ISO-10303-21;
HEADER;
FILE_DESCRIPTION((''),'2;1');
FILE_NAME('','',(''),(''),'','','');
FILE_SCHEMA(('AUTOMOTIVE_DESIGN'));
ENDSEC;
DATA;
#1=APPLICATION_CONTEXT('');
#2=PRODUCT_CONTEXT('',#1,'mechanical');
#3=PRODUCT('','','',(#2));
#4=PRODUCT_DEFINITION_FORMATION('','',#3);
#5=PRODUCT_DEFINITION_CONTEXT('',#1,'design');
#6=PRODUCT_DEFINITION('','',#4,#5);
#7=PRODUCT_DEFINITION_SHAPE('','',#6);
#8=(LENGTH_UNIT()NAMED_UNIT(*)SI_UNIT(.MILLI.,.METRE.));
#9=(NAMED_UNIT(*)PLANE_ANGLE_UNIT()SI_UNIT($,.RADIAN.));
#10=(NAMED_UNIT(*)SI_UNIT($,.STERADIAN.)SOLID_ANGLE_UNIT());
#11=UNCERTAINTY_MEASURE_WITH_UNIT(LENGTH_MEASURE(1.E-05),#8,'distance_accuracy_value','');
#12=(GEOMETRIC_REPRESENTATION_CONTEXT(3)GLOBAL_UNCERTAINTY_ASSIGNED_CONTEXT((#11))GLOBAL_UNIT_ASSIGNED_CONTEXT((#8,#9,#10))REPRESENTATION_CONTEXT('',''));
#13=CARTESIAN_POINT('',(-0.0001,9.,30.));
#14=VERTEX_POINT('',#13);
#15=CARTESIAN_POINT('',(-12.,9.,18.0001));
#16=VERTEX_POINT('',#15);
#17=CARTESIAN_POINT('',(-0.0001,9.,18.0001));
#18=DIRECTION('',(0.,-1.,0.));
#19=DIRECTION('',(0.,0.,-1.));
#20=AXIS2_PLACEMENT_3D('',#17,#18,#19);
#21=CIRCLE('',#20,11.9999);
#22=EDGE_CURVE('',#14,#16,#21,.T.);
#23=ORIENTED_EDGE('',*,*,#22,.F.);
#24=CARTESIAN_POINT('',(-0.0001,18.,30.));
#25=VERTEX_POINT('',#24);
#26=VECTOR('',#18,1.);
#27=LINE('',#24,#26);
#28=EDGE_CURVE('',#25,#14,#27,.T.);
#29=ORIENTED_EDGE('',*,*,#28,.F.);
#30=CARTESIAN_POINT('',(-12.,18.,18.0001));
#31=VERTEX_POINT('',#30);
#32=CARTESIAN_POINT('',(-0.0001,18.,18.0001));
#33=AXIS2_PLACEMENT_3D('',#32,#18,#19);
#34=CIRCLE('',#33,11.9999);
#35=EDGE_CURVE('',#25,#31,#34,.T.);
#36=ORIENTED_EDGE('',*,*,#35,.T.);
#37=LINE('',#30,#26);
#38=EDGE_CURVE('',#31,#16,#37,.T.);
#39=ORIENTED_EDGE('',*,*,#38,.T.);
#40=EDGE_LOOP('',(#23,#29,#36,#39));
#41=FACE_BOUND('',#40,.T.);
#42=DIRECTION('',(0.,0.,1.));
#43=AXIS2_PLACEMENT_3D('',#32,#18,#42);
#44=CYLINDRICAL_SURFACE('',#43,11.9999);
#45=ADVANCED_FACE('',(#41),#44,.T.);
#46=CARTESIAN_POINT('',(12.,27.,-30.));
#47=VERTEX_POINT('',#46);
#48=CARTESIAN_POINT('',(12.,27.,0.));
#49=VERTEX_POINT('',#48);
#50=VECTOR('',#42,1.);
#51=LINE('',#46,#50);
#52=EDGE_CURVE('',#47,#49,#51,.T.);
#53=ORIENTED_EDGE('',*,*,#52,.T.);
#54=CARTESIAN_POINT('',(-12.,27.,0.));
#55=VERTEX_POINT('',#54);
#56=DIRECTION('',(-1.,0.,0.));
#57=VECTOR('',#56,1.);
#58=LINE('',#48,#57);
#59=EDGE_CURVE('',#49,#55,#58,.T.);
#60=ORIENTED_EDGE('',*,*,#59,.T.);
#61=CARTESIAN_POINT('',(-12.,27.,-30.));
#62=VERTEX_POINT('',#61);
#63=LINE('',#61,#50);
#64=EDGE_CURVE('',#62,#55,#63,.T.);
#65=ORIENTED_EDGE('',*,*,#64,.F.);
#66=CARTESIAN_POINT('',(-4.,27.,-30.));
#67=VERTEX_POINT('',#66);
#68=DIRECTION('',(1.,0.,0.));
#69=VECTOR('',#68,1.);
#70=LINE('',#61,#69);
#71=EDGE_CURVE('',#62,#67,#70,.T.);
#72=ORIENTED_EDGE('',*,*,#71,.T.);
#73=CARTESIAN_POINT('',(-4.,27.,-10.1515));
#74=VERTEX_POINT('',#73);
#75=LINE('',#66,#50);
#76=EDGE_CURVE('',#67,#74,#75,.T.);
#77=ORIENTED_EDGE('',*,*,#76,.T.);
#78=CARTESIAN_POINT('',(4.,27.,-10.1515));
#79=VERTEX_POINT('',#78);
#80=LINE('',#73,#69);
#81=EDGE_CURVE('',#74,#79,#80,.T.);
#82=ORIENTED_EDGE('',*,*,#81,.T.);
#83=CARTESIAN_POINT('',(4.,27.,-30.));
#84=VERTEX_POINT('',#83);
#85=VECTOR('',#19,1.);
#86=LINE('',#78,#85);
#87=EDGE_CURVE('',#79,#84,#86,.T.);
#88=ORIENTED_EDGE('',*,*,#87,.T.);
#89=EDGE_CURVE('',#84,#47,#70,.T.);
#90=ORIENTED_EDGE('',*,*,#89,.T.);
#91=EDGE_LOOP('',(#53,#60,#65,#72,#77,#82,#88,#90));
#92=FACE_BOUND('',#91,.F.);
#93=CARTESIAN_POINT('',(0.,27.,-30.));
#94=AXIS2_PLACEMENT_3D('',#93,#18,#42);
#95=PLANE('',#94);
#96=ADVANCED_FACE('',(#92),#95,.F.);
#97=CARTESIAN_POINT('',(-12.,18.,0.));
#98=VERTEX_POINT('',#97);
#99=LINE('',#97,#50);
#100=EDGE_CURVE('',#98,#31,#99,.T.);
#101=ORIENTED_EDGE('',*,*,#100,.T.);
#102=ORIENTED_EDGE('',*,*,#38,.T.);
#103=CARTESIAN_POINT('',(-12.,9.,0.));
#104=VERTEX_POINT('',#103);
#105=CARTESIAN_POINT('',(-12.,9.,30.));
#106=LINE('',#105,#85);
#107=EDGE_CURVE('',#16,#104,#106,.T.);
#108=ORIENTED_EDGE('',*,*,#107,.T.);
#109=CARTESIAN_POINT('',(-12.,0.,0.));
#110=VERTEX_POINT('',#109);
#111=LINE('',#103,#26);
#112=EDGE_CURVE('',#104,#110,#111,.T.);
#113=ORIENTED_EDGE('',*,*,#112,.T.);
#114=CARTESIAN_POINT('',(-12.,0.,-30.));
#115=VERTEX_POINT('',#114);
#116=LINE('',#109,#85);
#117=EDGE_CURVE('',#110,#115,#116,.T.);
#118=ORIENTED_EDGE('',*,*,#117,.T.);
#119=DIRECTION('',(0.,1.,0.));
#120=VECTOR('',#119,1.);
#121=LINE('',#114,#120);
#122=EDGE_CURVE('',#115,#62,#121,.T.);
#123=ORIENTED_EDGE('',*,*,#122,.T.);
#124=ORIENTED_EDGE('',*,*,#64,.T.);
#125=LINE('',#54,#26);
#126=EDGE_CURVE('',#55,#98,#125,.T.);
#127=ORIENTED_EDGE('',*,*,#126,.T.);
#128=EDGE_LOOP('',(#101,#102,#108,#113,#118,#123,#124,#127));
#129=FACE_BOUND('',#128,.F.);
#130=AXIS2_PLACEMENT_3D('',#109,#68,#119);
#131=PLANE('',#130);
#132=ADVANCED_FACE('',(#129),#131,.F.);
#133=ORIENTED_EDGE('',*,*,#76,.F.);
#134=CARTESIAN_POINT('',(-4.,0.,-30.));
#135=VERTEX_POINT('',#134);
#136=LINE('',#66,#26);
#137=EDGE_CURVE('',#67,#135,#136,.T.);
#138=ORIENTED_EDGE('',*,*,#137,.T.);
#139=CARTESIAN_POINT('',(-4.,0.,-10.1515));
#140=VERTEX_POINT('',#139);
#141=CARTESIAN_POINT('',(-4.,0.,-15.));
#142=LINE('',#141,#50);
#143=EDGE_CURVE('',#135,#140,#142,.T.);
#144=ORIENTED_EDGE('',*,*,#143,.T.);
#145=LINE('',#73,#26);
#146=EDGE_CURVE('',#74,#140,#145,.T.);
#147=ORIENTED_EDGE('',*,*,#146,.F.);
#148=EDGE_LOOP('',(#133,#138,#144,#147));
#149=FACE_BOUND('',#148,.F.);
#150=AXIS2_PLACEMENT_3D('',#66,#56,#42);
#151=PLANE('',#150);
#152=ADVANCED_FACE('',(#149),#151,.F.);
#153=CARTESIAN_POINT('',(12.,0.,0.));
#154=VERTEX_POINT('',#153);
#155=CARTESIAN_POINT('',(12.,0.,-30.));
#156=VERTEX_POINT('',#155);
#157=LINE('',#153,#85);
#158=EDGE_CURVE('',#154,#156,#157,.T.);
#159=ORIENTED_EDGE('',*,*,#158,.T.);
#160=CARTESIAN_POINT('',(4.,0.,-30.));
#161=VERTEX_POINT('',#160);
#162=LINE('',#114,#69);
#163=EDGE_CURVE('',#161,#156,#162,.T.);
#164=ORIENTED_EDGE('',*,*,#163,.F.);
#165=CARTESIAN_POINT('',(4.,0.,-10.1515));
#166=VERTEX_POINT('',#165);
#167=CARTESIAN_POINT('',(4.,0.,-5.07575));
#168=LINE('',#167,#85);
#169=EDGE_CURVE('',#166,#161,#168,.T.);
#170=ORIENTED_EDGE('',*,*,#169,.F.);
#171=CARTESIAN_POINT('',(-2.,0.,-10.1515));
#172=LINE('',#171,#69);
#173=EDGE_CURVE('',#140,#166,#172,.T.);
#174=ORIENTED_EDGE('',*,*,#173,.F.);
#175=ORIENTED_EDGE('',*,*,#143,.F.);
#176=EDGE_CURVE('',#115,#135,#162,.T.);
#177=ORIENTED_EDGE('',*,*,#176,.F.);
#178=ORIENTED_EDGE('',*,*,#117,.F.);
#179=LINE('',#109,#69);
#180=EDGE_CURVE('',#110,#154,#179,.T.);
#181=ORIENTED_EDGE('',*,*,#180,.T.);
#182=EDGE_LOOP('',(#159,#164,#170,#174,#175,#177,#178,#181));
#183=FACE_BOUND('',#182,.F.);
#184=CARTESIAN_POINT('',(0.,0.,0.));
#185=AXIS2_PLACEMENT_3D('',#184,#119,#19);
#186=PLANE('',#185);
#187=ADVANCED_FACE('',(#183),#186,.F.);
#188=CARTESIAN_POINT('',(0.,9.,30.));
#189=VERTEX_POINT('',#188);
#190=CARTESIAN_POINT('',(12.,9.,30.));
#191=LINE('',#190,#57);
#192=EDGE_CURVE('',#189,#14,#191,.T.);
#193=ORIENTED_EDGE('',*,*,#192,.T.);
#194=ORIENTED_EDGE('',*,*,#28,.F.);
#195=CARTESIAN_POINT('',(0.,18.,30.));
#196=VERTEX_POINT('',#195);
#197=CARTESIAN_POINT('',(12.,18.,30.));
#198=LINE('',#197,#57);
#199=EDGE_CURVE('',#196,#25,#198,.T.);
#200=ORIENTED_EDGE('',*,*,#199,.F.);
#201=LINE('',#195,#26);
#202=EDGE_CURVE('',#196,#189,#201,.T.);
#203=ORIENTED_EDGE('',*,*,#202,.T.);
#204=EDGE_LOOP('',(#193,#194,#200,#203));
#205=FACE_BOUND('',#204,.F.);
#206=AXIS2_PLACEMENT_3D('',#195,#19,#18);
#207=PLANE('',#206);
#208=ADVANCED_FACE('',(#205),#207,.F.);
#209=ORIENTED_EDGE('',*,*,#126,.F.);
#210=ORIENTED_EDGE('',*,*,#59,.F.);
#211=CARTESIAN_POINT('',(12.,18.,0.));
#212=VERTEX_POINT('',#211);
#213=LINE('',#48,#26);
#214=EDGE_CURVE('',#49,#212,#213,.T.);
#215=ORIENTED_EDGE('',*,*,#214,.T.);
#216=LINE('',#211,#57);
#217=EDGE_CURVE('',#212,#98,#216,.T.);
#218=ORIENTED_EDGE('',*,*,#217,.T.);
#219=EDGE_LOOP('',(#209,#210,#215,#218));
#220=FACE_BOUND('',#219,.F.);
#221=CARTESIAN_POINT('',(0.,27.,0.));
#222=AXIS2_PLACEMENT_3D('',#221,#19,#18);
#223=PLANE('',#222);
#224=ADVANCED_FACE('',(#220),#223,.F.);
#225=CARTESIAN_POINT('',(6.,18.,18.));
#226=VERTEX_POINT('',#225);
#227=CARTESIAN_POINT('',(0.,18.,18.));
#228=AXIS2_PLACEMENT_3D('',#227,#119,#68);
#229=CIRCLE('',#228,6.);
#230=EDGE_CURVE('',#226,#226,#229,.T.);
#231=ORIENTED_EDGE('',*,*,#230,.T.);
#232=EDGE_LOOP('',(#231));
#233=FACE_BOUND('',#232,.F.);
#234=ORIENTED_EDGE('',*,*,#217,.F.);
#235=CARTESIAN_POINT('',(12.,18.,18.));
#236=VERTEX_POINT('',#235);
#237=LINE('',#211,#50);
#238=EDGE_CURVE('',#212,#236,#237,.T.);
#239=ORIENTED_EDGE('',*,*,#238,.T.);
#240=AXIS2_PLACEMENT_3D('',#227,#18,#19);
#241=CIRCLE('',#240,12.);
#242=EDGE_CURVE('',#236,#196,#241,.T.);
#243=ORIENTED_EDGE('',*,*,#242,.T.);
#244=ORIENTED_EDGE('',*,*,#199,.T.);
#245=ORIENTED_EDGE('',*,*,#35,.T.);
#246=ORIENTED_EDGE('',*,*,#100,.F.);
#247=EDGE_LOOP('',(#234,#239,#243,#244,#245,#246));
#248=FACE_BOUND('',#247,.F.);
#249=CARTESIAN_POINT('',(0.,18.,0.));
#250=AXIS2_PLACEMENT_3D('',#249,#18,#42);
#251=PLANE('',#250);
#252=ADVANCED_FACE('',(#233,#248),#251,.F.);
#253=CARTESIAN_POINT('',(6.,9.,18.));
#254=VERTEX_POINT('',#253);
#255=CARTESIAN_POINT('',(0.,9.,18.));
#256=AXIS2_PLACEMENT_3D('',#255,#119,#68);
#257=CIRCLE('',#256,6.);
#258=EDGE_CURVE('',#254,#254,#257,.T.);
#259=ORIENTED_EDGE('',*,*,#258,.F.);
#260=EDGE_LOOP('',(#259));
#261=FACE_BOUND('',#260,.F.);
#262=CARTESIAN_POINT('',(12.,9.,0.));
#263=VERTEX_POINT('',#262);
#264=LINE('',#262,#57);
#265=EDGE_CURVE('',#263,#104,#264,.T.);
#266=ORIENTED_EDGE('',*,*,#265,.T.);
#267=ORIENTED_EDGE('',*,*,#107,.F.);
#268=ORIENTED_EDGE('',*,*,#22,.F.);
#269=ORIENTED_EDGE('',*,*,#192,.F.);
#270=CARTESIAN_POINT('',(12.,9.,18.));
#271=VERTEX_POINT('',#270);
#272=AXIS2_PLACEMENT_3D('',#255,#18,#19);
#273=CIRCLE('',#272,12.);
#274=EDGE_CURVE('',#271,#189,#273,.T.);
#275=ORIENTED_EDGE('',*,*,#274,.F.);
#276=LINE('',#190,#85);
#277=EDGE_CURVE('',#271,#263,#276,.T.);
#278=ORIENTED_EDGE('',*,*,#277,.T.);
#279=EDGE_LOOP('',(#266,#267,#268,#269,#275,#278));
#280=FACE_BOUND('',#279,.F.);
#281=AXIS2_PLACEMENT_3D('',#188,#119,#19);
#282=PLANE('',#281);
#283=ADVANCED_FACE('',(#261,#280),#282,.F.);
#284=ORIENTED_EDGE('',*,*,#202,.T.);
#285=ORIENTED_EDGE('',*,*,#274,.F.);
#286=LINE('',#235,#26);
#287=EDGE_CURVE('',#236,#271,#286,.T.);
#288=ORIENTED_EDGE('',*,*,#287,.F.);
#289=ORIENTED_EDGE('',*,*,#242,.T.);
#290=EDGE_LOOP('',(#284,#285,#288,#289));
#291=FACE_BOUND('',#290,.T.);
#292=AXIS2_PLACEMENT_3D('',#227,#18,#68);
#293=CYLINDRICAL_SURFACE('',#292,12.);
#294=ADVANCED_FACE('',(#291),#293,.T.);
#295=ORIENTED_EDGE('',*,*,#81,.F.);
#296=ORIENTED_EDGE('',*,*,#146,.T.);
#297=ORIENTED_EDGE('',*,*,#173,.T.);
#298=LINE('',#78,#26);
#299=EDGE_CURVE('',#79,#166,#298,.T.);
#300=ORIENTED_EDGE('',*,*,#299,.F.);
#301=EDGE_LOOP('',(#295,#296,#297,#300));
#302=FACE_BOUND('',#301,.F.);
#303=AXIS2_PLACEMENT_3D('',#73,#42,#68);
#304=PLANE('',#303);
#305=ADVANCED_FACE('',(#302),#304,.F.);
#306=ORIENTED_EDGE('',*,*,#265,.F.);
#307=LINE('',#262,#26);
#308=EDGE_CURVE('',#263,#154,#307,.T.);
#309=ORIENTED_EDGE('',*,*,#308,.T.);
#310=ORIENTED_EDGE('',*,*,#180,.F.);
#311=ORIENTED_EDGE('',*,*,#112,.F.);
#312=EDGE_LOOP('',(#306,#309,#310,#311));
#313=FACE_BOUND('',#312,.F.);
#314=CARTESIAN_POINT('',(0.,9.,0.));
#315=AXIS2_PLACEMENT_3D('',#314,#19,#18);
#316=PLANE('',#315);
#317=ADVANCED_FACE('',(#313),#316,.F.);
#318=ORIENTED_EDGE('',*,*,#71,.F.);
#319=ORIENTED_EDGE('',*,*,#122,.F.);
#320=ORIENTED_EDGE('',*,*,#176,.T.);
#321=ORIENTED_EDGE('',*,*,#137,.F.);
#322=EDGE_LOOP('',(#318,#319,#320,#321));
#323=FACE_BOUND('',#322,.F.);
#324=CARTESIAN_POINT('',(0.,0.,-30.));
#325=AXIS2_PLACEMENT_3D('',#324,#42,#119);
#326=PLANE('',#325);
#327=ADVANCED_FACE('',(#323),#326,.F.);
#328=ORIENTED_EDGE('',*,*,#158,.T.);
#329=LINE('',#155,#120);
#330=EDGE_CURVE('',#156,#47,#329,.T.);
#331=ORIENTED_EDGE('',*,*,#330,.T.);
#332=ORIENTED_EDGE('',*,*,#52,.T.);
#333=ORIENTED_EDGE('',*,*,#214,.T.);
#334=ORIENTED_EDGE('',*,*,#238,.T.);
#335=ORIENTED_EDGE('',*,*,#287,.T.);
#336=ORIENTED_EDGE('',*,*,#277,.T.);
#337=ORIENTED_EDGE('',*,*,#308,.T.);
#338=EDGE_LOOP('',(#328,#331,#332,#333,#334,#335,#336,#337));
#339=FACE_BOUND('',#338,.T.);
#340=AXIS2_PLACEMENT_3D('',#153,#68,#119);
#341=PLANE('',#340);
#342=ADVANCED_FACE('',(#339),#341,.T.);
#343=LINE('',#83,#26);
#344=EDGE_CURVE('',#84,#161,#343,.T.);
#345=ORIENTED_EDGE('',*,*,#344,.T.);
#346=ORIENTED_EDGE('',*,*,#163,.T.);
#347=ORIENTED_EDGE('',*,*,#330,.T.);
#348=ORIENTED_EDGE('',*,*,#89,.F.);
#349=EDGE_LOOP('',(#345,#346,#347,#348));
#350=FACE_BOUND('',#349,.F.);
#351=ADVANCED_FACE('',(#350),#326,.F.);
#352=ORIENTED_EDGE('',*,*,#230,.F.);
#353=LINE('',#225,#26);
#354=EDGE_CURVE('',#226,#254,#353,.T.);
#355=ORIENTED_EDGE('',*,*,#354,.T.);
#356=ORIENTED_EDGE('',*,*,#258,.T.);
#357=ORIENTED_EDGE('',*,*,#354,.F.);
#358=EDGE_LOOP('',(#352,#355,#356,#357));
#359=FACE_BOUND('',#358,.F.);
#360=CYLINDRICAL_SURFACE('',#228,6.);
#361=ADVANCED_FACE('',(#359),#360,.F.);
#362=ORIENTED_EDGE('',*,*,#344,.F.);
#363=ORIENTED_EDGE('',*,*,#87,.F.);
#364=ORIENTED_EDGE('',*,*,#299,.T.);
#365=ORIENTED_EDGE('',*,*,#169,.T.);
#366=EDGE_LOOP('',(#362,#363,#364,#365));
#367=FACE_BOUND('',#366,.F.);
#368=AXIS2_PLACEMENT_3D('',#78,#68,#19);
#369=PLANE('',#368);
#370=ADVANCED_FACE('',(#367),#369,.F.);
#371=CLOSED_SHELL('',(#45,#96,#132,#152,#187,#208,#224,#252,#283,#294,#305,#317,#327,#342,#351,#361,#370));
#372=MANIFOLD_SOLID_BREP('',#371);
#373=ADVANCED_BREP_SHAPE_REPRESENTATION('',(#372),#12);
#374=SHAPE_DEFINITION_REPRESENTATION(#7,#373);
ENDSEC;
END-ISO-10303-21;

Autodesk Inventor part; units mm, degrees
ref_plane "YZ Plane" through (0, 0, 0) normal (1, 0, 0) x (0, 1, 0)
ref_plane "XZ Plane" through (0, 0, 0) normal (0, 1, 0) x (-1, 0, 0)
ref_plane "XY Plane" through (0, 0, 0) normal (0, 0, 1) x (1, 0, 0)
sketch "Sketch1" plane through (0, 0, 0) normal (1, 0, 0) x (0, 1, 0)
  line L0 (0, 0) -> (0, -30)
  line L1 (0, -30) -> (27, -30)
  line L2 (27, -30) -> (27, 0)
  line L3 (27, 0) -> (18, 0)
  line L4 (18, 0) -> (18, 30)
  line L5 (18, 30) -> (9, 30)
  line L6 (9, 30) -> (9, 0)
  line L7 (9, 0) -> (0, 0)
  dimension "d0" = 30
  dimension "d1" = 27
  dimension "d3" = 9
  dimension "d4" = 9
  dimension "d5" = 30
extrude "Extrusion1" add sketch "Sketch1" along normal mid plane 24
fillet "Fillet1" radius 12 1 edges at (12, 13.5, 30)
fillet "Fillet2" radius 12 1 edges at (-12, 13.5, 30)
sketch "Sketch2" plane through (-12, 18, 0) normal (0, 1, 0) x (1, 0, 0)
  circle A0 centre (12, -18) radius 6
  line L0 (0, 0) -> (24, 0) projected
  line L1 (0, 30) -> (24, 30) projected
  point P0 (12, 0)
  dimension "d10" = 12
  dimension "d11" = 18
sketch "Sketch3" plane through (-12, 27, 0) normal (0, 1, 0) x (1, 0, 0)
  line L0 (0, 30) -> (24, 30) projected
  line L1 (8, 30) -> (8, 10.1515)
  line L2 (8, 10.1515) -> (16, 10.1515)
  line L3 (16, 10.1515) -> (16, 30)
  line L4 (24, 30) -> (24, 0) projected
  line L5 (8, 30) -> (16, 30)
  point P0 (12, 0)
  dimension "d12" = 8
  dimension "d13" = 8
extrude "Extrusion2" cut sketch "Sketch2" against normal through all
extrude "Extrusion3" cut sketch "Sketch3" against normal through all
